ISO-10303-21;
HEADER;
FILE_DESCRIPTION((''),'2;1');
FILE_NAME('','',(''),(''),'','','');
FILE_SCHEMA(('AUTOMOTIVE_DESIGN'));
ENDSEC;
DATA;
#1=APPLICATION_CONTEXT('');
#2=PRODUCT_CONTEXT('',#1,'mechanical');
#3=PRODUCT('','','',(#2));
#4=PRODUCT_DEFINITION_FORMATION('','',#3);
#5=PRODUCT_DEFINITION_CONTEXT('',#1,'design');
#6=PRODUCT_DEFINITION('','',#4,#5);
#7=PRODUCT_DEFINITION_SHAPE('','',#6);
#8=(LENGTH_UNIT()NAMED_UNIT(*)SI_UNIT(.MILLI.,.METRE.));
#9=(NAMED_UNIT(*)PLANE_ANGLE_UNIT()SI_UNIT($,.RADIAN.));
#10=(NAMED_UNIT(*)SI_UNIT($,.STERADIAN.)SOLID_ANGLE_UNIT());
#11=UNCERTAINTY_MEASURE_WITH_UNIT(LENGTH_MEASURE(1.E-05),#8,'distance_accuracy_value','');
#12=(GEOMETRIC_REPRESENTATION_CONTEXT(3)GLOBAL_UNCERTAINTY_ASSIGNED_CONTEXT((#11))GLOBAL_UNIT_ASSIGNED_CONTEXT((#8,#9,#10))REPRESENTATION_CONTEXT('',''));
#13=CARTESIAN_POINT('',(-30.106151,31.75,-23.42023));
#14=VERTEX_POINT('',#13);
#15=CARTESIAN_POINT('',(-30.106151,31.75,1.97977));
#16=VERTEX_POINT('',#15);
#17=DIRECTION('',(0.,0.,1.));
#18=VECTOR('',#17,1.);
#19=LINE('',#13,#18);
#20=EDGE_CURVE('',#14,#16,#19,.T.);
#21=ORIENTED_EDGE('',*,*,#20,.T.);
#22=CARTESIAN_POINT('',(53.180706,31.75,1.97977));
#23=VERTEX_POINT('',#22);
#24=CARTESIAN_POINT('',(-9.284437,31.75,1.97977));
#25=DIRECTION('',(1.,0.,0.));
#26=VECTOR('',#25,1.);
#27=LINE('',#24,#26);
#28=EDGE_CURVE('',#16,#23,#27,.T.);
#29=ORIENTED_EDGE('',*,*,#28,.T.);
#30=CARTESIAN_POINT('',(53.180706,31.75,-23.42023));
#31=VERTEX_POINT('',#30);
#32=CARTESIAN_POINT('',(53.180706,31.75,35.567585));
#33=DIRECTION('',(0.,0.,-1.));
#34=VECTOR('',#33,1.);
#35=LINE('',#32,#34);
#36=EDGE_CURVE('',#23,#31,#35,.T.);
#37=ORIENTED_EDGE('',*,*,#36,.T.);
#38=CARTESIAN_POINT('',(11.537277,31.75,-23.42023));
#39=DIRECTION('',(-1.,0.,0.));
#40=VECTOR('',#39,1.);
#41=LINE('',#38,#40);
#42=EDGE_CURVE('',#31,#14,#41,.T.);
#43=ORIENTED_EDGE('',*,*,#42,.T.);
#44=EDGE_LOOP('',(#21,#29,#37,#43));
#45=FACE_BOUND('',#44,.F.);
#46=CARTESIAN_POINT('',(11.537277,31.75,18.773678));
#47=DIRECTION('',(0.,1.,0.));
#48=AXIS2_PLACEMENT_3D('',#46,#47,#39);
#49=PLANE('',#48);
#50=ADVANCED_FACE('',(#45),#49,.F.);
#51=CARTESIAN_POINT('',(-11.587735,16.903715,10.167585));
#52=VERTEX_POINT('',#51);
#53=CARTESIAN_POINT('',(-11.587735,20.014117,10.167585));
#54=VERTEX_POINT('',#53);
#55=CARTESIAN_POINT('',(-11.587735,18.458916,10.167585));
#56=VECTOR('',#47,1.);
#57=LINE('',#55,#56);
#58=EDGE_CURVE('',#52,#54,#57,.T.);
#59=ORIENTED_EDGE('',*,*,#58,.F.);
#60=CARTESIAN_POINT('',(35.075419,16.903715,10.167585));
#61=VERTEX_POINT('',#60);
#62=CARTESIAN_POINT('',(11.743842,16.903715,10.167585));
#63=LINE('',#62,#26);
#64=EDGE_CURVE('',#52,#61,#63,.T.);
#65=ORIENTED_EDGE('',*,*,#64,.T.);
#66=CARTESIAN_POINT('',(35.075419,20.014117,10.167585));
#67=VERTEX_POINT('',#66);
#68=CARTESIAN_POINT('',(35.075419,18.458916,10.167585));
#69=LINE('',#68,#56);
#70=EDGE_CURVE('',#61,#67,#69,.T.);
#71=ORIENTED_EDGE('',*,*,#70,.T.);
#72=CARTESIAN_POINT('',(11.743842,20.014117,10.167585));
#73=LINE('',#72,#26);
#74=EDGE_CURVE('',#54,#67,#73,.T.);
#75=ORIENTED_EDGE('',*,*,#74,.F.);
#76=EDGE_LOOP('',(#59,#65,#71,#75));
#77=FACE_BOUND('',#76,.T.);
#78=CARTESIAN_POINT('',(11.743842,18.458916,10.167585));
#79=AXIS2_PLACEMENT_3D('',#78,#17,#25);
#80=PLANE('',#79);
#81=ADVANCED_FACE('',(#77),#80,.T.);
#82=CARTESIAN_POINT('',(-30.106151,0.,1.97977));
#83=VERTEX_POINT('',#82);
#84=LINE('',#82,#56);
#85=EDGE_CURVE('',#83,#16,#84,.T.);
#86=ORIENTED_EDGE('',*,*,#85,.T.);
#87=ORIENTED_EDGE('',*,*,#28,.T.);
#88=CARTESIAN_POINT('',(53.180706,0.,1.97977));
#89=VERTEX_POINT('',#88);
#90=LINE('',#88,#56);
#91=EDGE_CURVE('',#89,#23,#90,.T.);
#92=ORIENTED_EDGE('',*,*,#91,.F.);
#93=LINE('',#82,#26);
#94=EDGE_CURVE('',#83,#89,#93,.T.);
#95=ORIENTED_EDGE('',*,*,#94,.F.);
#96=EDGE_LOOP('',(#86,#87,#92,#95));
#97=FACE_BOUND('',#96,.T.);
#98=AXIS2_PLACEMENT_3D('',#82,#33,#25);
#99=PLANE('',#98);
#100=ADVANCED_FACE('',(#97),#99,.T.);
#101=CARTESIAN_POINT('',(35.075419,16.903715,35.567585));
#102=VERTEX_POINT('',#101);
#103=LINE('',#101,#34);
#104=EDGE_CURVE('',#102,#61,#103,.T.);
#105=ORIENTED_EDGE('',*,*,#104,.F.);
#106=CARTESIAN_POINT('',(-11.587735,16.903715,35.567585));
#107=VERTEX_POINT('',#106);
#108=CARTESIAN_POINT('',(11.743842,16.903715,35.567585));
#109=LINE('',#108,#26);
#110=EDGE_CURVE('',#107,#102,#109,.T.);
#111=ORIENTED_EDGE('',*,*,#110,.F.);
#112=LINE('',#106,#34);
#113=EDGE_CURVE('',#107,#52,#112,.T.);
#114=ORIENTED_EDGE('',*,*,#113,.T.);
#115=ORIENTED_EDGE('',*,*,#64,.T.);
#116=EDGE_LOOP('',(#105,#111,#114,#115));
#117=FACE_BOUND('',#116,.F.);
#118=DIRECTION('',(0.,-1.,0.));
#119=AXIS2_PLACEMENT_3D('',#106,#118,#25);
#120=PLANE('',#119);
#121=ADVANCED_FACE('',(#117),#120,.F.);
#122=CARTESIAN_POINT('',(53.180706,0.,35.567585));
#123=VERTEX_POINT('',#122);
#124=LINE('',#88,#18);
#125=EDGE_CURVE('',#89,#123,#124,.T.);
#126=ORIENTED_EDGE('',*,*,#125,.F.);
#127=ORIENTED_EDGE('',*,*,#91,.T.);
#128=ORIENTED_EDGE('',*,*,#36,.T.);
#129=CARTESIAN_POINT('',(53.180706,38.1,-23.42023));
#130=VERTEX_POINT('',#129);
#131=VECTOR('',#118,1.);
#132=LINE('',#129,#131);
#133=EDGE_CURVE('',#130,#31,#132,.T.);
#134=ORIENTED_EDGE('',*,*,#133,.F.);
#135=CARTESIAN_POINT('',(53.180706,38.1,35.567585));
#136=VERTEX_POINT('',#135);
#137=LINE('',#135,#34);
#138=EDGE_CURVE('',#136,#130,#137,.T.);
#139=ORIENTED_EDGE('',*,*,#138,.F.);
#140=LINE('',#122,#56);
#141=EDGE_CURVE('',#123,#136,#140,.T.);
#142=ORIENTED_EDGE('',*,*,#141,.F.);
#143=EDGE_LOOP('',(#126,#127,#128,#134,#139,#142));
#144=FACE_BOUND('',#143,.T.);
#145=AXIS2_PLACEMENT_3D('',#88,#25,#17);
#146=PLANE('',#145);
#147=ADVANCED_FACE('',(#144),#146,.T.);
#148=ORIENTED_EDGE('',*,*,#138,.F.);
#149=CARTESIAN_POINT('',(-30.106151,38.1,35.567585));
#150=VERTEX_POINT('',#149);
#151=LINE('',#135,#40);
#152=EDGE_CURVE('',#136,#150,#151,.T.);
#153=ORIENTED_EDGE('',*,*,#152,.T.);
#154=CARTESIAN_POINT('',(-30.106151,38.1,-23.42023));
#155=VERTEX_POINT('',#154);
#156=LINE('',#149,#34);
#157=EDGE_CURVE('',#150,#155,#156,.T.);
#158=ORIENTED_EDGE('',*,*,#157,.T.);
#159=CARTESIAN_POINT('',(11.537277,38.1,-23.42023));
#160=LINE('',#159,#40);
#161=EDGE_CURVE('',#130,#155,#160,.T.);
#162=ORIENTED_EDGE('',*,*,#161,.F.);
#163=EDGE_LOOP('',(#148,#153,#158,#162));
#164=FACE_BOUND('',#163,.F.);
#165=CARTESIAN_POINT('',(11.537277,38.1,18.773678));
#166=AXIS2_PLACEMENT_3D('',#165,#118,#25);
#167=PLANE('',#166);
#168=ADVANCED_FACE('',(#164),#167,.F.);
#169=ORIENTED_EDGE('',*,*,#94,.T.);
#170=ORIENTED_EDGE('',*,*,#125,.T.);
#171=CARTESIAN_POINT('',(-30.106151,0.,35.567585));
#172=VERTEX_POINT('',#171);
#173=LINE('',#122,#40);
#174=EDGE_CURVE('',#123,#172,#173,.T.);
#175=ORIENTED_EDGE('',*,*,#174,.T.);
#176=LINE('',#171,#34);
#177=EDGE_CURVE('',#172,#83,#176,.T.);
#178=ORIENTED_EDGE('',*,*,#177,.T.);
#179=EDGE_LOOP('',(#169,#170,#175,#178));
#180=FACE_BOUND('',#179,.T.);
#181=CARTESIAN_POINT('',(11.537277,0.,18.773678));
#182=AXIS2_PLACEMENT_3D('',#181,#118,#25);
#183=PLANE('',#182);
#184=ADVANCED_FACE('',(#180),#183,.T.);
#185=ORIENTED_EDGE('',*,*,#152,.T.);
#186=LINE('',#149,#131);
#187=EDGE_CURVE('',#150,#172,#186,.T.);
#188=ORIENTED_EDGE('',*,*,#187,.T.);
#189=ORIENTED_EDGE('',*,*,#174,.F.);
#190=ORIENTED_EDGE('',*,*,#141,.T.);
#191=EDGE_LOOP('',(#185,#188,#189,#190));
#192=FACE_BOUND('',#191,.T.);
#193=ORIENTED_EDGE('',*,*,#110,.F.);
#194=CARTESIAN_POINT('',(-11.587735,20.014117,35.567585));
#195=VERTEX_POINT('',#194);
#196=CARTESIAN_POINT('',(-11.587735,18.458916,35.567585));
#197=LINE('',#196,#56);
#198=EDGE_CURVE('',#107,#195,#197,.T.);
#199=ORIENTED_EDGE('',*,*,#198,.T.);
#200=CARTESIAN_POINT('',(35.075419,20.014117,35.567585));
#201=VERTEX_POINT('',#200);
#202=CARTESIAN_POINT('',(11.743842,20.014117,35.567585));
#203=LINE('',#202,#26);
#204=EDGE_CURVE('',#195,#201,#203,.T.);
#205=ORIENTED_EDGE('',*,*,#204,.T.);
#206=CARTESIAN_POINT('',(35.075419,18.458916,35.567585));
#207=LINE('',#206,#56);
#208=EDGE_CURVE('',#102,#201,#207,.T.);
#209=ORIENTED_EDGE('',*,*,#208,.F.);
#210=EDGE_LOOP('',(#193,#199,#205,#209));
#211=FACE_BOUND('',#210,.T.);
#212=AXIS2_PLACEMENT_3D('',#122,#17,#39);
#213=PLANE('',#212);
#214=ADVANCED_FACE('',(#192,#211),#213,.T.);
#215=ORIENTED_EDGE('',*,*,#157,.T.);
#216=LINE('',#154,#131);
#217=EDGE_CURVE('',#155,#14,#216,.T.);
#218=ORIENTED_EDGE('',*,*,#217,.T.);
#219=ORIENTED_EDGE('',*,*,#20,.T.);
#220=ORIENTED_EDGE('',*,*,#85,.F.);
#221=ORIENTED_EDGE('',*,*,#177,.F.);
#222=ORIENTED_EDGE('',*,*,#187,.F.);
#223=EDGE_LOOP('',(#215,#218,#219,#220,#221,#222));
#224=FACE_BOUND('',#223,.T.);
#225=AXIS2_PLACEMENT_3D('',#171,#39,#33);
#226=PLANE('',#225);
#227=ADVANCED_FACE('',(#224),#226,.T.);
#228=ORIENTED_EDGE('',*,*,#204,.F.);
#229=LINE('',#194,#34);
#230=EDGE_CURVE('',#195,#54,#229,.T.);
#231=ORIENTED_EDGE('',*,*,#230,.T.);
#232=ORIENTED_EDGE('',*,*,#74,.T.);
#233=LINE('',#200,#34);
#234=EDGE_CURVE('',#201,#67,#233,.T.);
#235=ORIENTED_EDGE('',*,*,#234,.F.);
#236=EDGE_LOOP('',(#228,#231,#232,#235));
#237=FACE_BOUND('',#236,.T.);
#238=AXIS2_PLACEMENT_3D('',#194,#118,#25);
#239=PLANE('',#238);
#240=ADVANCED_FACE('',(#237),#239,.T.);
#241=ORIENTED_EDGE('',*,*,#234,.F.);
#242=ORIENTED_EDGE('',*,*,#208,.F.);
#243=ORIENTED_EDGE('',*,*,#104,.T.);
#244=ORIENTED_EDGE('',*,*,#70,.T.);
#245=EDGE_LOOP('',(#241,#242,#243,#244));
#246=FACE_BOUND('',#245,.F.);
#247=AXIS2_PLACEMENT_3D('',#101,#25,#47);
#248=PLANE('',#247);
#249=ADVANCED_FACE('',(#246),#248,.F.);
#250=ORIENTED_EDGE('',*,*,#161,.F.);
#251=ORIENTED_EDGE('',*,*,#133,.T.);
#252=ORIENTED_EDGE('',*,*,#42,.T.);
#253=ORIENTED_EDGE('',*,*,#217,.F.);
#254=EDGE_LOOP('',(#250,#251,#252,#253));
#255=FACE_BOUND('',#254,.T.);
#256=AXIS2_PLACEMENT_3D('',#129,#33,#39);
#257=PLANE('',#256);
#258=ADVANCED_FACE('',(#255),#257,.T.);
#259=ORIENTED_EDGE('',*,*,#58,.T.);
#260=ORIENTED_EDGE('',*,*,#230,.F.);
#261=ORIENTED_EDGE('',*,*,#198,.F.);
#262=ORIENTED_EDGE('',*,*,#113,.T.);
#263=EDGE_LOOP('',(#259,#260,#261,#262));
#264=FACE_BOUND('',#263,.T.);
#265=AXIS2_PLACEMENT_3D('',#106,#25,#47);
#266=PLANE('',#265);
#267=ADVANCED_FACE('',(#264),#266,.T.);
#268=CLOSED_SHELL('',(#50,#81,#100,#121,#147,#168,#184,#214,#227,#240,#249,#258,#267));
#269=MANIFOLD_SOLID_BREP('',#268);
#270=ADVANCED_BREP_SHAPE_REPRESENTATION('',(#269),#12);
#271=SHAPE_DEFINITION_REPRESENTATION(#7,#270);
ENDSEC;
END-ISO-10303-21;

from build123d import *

# Parameters (mm, degrees)
F1_DEPTH = 38.1
F2_W     = 83.2868572325
F2_H     = 33.5878157057
F2_H_2   = 25.4
F3_DEPTH = 6.35
F4_W     = 46.6631539166
F4_H     = 3.1104013324
F5_DEPTH = 25.4


# Not quite as in the source:
# - a feature names something its author has since deleted; it is built from what else it names


with BuildPart() as f1:
    # F0 (on Front) → F1 (new body)
    with BuildSketch(Plane.XZ):
        Polygon((53.1807057559, 35.5675853789), (-30.1061514765, 35.5675853789), (-30.1061514765, 1.9797696732), (-19.1832855344, 1.9797696732), (-9.4892410561, 1.9797696732), (53.1807057559, 1.9797696732), align=None)
    extrude(amount=-F1_DEPTH)

    # F2 (on face) → F3 (join)
    with BuildSketch(Plane(origin=(0, 38.1, 0), x_dir=(-1, 0, 0), z_dir=(0, 1, 0))):
        with Locations((-11.5372771397, 18.773677526)):
            Rectangle(F2_W, F2_H)
        with Locations((-11.5372771397, -10.7202303268)):
            Rectangle(F2_W, F2_H_2)
    extrude(amount=-F3_DEPTH)

    # F4 (on face) → F5 (cut)
    with BuildSketch(Plane.XY.offset(35.5675853789)):
        with Locations((11.7438416928, 18.4589158744)):
            Rectangle(F4_W, F4_H)
    extrude(amount=-F5_DEPTH, mode=Mode.SUBTRACT)


solid = f1.part
